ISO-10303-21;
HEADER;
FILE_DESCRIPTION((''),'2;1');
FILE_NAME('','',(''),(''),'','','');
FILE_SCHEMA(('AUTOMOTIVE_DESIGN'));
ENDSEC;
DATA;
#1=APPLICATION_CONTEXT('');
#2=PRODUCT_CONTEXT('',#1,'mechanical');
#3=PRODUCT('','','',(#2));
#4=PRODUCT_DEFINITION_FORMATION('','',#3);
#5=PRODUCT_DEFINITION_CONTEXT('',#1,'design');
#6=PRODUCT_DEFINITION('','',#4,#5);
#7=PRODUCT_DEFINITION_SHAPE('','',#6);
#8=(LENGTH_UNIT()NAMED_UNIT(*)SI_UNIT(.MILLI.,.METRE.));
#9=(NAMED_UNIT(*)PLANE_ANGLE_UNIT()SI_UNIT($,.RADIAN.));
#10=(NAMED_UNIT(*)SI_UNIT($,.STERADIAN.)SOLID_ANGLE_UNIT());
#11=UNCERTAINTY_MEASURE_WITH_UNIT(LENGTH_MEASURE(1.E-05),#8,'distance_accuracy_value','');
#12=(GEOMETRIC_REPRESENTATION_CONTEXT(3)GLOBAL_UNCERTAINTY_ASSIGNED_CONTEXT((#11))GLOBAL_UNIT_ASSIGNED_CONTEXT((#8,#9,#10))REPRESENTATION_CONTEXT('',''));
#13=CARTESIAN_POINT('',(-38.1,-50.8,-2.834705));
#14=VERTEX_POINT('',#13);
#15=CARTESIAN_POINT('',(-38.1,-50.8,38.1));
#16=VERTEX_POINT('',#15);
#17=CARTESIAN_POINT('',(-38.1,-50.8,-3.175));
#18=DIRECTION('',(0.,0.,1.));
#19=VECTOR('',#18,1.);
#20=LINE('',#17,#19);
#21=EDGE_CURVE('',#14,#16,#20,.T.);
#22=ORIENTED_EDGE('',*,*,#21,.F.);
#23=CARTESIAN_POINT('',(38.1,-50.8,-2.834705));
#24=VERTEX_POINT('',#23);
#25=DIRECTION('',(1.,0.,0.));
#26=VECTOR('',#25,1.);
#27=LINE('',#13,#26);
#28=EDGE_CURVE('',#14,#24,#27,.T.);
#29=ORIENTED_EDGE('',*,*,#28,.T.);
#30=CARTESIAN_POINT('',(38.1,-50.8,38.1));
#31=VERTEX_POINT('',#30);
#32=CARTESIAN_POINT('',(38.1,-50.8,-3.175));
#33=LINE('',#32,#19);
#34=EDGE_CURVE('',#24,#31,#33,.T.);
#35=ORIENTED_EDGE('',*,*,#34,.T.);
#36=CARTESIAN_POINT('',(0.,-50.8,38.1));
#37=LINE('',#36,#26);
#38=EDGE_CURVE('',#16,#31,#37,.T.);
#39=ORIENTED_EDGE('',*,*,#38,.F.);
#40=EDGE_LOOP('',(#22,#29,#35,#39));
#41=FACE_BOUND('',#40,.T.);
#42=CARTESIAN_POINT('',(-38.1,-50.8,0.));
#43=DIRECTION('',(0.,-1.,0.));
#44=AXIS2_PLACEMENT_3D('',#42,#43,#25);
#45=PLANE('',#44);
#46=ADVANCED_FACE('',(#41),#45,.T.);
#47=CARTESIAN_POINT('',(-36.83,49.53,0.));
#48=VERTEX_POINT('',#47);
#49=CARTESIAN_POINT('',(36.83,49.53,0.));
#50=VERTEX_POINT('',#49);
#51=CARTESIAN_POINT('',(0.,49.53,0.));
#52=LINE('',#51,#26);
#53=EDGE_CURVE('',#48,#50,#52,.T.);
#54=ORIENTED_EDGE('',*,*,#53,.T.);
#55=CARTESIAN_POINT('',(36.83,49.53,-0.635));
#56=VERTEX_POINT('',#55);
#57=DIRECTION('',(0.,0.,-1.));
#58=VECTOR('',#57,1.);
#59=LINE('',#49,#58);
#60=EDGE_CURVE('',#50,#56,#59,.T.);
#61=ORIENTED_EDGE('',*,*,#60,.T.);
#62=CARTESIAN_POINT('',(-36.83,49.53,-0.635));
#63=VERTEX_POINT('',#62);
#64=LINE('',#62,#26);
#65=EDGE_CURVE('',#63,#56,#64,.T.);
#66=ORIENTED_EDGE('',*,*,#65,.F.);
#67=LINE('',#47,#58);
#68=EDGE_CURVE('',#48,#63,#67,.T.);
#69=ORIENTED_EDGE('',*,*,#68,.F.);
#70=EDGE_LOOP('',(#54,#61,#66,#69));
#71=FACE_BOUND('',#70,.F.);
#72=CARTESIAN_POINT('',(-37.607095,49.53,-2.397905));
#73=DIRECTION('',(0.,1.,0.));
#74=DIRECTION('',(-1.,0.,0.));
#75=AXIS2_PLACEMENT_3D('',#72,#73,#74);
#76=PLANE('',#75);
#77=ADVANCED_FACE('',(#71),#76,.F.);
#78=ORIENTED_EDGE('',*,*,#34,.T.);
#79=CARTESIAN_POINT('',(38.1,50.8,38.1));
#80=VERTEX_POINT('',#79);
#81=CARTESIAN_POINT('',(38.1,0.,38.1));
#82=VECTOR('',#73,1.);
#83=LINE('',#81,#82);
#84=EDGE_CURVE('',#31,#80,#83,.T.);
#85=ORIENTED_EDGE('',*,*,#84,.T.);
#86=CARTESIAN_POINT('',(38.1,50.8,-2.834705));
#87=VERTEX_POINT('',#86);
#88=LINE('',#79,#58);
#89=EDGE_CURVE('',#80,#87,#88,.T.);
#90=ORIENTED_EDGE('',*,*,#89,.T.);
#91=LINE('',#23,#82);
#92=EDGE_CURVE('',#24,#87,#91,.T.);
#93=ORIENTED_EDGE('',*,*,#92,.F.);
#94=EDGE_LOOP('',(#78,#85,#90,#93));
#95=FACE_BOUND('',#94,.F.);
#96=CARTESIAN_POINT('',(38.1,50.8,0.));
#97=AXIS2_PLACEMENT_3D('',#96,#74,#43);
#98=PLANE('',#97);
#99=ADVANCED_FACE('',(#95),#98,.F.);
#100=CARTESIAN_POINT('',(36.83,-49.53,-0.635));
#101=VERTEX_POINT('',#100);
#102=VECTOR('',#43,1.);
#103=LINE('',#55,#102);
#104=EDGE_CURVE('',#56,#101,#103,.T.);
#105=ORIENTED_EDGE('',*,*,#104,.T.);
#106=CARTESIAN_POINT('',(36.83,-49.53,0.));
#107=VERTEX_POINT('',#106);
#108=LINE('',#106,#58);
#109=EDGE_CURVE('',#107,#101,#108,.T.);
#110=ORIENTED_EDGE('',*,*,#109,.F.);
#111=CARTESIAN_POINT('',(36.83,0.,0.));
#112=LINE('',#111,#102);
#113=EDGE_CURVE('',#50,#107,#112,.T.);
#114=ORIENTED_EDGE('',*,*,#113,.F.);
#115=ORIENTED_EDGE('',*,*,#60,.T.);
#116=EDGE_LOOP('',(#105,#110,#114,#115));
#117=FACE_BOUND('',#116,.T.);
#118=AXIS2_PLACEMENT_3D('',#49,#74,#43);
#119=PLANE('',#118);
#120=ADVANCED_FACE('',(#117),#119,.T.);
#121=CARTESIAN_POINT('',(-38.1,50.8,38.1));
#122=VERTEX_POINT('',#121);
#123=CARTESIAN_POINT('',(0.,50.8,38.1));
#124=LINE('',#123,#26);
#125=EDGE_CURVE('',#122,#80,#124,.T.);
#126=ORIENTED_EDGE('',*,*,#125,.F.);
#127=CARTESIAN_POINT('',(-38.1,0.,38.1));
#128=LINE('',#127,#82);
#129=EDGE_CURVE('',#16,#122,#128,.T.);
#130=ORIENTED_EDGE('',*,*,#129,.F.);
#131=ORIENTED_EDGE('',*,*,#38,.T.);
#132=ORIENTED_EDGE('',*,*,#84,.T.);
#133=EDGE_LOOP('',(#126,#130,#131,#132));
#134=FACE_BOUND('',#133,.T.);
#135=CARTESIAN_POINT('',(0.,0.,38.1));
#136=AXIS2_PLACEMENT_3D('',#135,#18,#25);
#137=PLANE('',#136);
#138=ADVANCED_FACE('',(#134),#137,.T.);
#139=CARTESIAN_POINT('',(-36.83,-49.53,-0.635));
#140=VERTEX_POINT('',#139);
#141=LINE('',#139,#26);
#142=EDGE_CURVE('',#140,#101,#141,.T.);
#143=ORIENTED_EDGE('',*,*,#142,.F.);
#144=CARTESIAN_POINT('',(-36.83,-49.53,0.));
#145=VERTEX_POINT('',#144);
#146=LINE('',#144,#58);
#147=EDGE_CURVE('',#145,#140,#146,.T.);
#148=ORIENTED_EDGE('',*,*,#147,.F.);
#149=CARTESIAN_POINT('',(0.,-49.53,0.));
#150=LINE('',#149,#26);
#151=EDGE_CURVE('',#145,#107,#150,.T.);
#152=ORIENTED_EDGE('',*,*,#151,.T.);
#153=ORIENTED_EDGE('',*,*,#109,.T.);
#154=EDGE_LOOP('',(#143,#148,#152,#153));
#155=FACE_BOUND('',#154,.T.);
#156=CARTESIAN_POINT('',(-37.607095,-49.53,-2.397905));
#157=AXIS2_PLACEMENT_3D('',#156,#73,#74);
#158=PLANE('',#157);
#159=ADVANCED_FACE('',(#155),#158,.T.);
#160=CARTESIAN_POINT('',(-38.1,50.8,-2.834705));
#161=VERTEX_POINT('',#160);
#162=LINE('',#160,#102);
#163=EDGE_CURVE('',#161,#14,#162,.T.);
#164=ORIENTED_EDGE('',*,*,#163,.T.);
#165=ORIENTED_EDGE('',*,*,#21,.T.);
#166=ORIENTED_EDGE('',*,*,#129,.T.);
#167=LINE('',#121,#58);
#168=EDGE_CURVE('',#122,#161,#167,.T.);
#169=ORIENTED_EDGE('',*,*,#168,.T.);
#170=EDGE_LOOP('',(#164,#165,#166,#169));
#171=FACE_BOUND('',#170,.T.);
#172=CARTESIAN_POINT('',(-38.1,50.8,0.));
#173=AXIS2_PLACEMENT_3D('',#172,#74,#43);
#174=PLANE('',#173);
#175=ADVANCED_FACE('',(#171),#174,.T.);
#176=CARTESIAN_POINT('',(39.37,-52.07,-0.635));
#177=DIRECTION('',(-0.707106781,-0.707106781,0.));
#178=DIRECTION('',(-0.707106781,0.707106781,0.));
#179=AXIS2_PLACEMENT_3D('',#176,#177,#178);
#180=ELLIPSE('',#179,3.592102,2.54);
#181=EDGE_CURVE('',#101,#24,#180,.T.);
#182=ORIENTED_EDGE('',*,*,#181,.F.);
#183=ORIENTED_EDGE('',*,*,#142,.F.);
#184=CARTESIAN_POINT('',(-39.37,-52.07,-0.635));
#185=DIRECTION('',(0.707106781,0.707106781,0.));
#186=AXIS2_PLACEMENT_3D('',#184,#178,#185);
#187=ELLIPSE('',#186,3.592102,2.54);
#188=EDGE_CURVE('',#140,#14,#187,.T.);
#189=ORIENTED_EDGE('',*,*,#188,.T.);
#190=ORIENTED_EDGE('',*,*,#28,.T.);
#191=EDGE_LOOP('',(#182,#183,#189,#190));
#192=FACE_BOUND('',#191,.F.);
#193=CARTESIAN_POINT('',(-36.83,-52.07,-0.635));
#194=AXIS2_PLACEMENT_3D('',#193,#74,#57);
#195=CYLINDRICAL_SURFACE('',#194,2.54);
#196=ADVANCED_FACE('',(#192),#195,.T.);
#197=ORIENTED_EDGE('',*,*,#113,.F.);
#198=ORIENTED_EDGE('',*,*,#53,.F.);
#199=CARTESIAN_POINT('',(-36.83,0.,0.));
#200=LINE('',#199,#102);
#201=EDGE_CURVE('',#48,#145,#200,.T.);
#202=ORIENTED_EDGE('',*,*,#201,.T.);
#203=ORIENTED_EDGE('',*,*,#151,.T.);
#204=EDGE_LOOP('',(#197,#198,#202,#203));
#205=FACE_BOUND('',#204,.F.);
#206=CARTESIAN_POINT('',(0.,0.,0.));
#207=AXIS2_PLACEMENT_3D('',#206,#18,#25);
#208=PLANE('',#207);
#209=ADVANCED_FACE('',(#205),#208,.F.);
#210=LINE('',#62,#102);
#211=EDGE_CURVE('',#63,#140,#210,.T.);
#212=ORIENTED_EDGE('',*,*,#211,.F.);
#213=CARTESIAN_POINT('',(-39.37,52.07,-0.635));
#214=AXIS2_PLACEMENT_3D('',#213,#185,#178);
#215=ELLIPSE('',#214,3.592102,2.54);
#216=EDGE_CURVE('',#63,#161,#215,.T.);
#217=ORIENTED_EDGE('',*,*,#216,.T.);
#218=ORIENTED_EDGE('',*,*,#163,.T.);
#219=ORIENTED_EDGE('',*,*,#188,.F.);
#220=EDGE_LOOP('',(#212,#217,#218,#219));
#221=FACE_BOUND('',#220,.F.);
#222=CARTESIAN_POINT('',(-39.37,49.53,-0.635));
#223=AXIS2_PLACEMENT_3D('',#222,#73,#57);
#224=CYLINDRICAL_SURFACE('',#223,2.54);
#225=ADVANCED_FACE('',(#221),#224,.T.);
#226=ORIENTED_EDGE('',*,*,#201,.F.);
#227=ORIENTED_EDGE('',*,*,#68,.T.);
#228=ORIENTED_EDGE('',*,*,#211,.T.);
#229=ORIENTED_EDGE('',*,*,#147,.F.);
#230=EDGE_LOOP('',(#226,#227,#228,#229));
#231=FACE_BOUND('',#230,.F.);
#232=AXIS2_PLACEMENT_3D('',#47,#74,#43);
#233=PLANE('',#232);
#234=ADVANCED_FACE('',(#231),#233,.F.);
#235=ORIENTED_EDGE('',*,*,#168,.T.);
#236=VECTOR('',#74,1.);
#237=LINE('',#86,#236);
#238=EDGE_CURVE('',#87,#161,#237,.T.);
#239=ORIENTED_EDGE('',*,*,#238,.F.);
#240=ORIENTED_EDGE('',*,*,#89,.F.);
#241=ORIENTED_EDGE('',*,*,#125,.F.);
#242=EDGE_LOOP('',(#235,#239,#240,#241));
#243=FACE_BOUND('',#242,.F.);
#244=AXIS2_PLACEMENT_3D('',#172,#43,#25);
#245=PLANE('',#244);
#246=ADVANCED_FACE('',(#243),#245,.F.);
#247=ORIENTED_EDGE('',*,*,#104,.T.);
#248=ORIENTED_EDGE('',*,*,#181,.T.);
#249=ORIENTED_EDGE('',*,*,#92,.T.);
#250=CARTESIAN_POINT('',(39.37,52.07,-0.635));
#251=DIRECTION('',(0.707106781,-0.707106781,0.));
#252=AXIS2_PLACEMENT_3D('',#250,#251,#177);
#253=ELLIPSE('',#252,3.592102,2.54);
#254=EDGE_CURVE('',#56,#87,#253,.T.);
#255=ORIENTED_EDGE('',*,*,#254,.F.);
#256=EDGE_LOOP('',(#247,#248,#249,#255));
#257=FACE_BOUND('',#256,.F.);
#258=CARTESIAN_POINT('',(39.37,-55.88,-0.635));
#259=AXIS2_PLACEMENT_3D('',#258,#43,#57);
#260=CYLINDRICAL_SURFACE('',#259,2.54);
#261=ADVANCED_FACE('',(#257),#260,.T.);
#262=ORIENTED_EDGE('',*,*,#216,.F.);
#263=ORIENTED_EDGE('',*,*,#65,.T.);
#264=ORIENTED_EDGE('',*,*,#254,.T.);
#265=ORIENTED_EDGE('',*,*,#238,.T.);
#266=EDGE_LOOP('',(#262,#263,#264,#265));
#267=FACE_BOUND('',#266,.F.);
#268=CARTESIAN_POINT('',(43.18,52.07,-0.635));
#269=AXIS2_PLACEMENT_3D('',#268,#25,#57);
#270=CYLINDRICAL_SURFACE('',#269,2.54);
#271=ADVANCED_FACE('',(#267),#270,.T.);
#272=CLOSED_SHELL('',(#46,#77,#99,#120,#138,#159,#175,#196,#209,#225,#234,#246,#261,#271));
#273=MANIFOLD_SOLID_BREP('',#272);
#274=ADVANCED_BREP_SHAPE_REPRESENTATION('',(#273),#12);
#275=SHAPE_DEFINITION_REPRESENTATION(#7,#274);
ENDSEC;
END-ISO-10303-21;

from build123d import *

# Parameters (mm, degrees)
F0_W         = 76.2
F0_H         = 101.6
F1_DEPTH     = 38.1
F3_W         = 76.2
F3_H         = 101.6
F3_W_2       = 73.66
F3_H_2       = 99.06
F4_DEPTH     = 3.175
F5_T1_DEPTH  = 99.06
F5_T3_DEPTH  = 73.66
F5_T9_DEPTH  = 105.41
F5_T15_DEPTH = 80.01
F5_T24_DEPTH = 105.41
F5_T30_DEPTH = 80.01
F5_T39_DEPTH = 80.01
F5_T45_DEPTH = 105.41
F5_T54_DEPTH = 105.41
F5_T60_DEPTH = 80.01


# Not quite as in the source:
# - a fillet or chamfer that OpenCascade refuses, or shapes differently, is made with other operations: its cross-section is extruded or revolved along the edge and cut away or added


with BuildPart() as f1:
    # F0 (on Top) → F1 (new body)
    with BuildSketch(Plane.XY):
        Rectangle(F0_W, F0_H)
    extrude(amount=F1_DEPTH)

    # F3 (on face) → F4 (join)
    with BuildSketch(Plane(origin=(0, 0, 0), x_dir=(1, 0, 0), z_dir=(0, 0, -1))):
        Rectangle(F3_W, F3_H)
        Rectangle(F3_W_2, F3_H_2, mode=Mode.SUBTRACT)
    extrude(amount=F4_DEPTH)

    # F5: fillet of radius 2.54 on 4 edges, made by hand

    # F5_s2 → F5_t1 (cut)
    with BuildSketch(Plane.XZ.offset(-49.53)):
        with BuildLine():
            ThreePointArc((-39.37, -3.175), (-37.5739487758, -2.4310512242), (-36.83, -0.635))
            Line((-36.83, -0.635), (-36.83, -3.175))
            Line((-36.83, -3.175), (-39.37, -3.175))
        make_face()
        with BuildLine():
            ThreePointArc((39.37, -3.175), (37.5739487758, -2.4310512242), (36.83, -0.635))
            Line((36.83, -0.635), (36.83, -3.175))
            Line((36.83, -3.175), (39.37, -3.175))
        make_face()
    extrude(amount=F5_T1_DEPTH, mode=Mode.SUBTRACT)

    # F5_s4 → F5_t3 (cut)
    with BuildSketch(Plane.YZ.offset(-36.83)):
        with BuildLine():
            ThreePointArc((-52.07, -3.175), (-50.2739487758, -2.4310512242), (-49.53, -0.635))
            Line((-49.53, -0.635), (-49.53, -3.175))
            Line((-49.53, -3.175), (-52.07, -3.175))
        make_face()
        with BuildLine():
            ThreePointArc((52.07, -3.175), (50.2739487758, -2.4310512242), (49.53, -0.635))
            Line((49.53, -0.635), (49.53, -3.175))
            Line((49.53, -3.175), (52.07, -3.175))
        make_face()
    extrude(amount=F5_T3_DEPTH, mode=Mode.SUBTRACT)


with BuildPart() as f5_tool7:
    # F5_s8 → F5_t9 (new body)
    with BuildSketch(Plane.XZ.offset(-55.88)):
        with BuildLine():
            ThreePointArc((-39.37, -3.175), (-37.5739487758, -2.4310512242), (-36.83, -0.635))
            Line((-36.83, -0.635), (-36.83, -3.175))
            Line((-36.83, -3.175), (-39.37, -3.175))
        make_face()
    extrude(amount=F5_T9_DEPTH)

    split(bisect_by=Plane.XZ.offset(-49.53), keep=Keep.BOTTOM)

    split(bisect_by=Plane.YZ.offset(-38.1), keep=Keep.TOP)

    split(bisect_by=Plane.XZ.offset(-50.8), keep=Keep.TOP)


with BuildPart() as f5_tool13:
    # F5_s14 → F5_t15 (new body)
    with BuildSketch(Plane.YZ.offset(36.83)):
        with BuildLine():
            ThreePointArc((52.07, -3.175), (50.2739487758, -2.4310512242), (49.53, -0.635))
            Line((49.53, -0.635), (49.53, -3.175))
            Line((49.53, -3.175), (52.07, -3.175))
        make_face()
    extrude(amount=-F5_T15_DEPTH)

    split(bisect_by=Plane.YZ.offset(-36.83), keep=Keep.BOTTOM)

    split(bisect_by=Plane.YZ.offset(-38.1), keep=Keep.TOP)

    split(bisect_by=Plane.XZ.offset(-50.8), keep=Keep.TOP)


with BuildPart() as f5_tool7_1:
    add(f5_tool7.part)

    # F5_t19: intersect F5_tool13
    add(f5_tool13.part, mode=Mode.INTERSECT)


with BuildPart() as f1_1:
    add(f1.part)

    # F5_t5: cut F5_tool7
    add(f5_tool7_1.part, mode=Mode.SUBTRACT)


with BuildPart() as f5_tool22:
    # F5_s23 → F5_t24 (new body)
    with BuildSketch(Plane.XZ.offset(-49.53)):
        with BuildLine():
            ThreePointArc((-39.37, -3.175), (-37.5739487758, -2.4310512242), (-36.83, -0.635))
            Line((-36.83, -0.635), (-36.83, -3.175))
            Line((-36.83, -3.175), (-39.37, -3.175))
        make_face()
    extrude(amount=F5_T24_DEPTH)

    split(bisect_by=Plane.XZ.offset(49.53), keep=Keep.TOP)

    split(bisect_by=Plane.YZ.offset(-38.1), keep=Keep.TOP)

    split(bisect_by=Plane.XZ.offset(50.8), keep=Keep.BOTTOM)


with BuildPart() as f5_tool28:
    # F5_s29 → F5_t30 (new body)
    with BuildSketch(Plane.YZ.offset(-43.18)):
        with BuildLine():
            ThreePointArc((-52.07, -3.175), (-50.2739487758, -2.4310512242), (-49.53, -0.635))
            Line((-49.53, -0.635), (-49.53, -3.175))
            Line((-49.53, -3.175), (-52.07, -3.175))
        make_face()
    extrude(amount=F5_T30_DEPTH)

    split(bisect_by=Plane.YZ.offset(-36.83), keep=Keep.BOTTOM)

    split(bisect_by=Plane.YZ.offset(-38.1), keep=Keep.TOP)

    split(bisect_by=Plane.XZ.offset(50.8), keep=Keep.BOTTOM)


with BuildPart() as f5_tool22_1:
    add(f5_tool22.part)

    # F5_t34: intersect F5_tool28
    add(f5_tool28.part, mode=Mode.INTERSECT)


with BuildPart() as f1_2:
    add(f1_1.part)

    # F5_t20: cut F5_tool22
    add(f5_tool22_1.part, mode=Mode.SUBTRACT)


with BuildPart() as f5_tool37:
    # F5_s38 → F5_t39 (new body)
    with BuildSketch(Plane.YZ.offset(-36.83)):
        with BuildLine():
            ThreePointArc((-52.07, -3.175), (-50.2739487758, -2.4310512242), (-49.53, -0.635))
            Line((-49.53, -0.635), (-49.53, -3.175))
            Line((-49.53, -3.175), (-52.07, -3.175))
        make_face()
    extrude(amount=F5_T39_DEPTH)

    split(bisect_by=Plane.YZ.offset(38.1), keep=Keep.BOTTOM)

    split(bisect_by=Plane.YZ.offset(36.83), keep=Keep.TOP)

    split(bisect_by=Plane.XZ.offset(50.8), keep=Keep.BOTTOM)


with BuildPart() as f5_tool43:
    # F5_s44 → F5_t45 (new body)
    with BuildSketch(Plane.XZ.offset(55.88)):
        with BuildLine():
            ThreePointArc((39.37, -3.175), (37.5739487758, -2.4310512242), (36.83, -0.635))
            Line((36.83, -0.635), (36.83, -3.175))
            Line((36.83, -3.175), (39.37, -3.175))
        make_face()
    extrude(amount=-F5_T45_DEPTH)

    split(bisect_by=Plane.YZ.offset(38.1), keep=Keep.BOTTOM)

    split(bisect_by=Plane.XZ.offset(49.53), keep=Keep.TOP)

    split(bisect_by=Plane.XZ.offset(50.8), keep=Keep.BOTTOM)


with BuildPart() as f5_tool37_1:
    add(f5_tool37.part)

    # F5_t49: intersect F5_tool43
    add(f5_tool43.part, mode=Mode.INTERSECT)


with BuildPart() as f1_3:
    add(f1_2.part)

    # F5_t35: cut F5_tool37
    add(f5_tool37_1.part, mode=Mode.SUBTRACT)


with BuildPart() as f5_tool52:
    # F5_s53 → F5_t54 (new body)
    with BuildSketch(Plane.XZ.offset(49.53)):
        with BuildLine():
            ThreePointArc((39.37, -3.175), (37.5739487758, -2.4310512242), (36.83, -0.635))
            Line((36.83, -0.635), (36.83, -3.175))
            Line((36.83, -3.175), (39.37, -3.175))
        make_face()
    extrude(amount=-F5_T54_DEPTH)

    split(bisect_by=Plane.YZ.offset(38.1), keep=Keep.BOTTOM)

    split(bisect_by=Plane.XZ.offset(-49.53), keep=Keep.BOTTOM)

    split(bisect_by=Plane.XZ.offset(-50.8), keep=Keep.TOP)


with BuildPart() as f5_tool58:
    # F5_s59 → F5_t60 (new body)
    with BuildSketch(Plane.YZ.offset(43.18)):
        with BuildLine():
            ThreePointArc((52.07, -3.175), (50.2739487758, -2.4310512242), (49.53, -0.635))
            Line((49.53, -0.635), (49.53, -3.175))
            Line((49.53, -3.175), (52.07, -3.175))
        make_face()
    extrude(amount=-F5_T60_DEPTH)

    split(bisect_by=Plane.YZ.offset(38.1), keep=Keep.BOTTOM)

    split(bisect_by=Plane.YZ.offset(36.83), keep=Keep.TOP)

    split(bisect_by=Plane.XZ.offset(-50.8), keep=Keep.TOP)


with BuildPart() as f5_tool52_1:
    add(f5_tool52.part)

    # F5_t64: intersect F5_tool58
    add(f5_tool58.part, mode=Mode.INTERSECT)


with BuildPart() as f1_4:
    add(f1_3.part)

    # F5_t50: cut F5_tool52
    add(f5_tool52_1.part, mode=Mode.SUBTRACT)


solid = f1_4.part
